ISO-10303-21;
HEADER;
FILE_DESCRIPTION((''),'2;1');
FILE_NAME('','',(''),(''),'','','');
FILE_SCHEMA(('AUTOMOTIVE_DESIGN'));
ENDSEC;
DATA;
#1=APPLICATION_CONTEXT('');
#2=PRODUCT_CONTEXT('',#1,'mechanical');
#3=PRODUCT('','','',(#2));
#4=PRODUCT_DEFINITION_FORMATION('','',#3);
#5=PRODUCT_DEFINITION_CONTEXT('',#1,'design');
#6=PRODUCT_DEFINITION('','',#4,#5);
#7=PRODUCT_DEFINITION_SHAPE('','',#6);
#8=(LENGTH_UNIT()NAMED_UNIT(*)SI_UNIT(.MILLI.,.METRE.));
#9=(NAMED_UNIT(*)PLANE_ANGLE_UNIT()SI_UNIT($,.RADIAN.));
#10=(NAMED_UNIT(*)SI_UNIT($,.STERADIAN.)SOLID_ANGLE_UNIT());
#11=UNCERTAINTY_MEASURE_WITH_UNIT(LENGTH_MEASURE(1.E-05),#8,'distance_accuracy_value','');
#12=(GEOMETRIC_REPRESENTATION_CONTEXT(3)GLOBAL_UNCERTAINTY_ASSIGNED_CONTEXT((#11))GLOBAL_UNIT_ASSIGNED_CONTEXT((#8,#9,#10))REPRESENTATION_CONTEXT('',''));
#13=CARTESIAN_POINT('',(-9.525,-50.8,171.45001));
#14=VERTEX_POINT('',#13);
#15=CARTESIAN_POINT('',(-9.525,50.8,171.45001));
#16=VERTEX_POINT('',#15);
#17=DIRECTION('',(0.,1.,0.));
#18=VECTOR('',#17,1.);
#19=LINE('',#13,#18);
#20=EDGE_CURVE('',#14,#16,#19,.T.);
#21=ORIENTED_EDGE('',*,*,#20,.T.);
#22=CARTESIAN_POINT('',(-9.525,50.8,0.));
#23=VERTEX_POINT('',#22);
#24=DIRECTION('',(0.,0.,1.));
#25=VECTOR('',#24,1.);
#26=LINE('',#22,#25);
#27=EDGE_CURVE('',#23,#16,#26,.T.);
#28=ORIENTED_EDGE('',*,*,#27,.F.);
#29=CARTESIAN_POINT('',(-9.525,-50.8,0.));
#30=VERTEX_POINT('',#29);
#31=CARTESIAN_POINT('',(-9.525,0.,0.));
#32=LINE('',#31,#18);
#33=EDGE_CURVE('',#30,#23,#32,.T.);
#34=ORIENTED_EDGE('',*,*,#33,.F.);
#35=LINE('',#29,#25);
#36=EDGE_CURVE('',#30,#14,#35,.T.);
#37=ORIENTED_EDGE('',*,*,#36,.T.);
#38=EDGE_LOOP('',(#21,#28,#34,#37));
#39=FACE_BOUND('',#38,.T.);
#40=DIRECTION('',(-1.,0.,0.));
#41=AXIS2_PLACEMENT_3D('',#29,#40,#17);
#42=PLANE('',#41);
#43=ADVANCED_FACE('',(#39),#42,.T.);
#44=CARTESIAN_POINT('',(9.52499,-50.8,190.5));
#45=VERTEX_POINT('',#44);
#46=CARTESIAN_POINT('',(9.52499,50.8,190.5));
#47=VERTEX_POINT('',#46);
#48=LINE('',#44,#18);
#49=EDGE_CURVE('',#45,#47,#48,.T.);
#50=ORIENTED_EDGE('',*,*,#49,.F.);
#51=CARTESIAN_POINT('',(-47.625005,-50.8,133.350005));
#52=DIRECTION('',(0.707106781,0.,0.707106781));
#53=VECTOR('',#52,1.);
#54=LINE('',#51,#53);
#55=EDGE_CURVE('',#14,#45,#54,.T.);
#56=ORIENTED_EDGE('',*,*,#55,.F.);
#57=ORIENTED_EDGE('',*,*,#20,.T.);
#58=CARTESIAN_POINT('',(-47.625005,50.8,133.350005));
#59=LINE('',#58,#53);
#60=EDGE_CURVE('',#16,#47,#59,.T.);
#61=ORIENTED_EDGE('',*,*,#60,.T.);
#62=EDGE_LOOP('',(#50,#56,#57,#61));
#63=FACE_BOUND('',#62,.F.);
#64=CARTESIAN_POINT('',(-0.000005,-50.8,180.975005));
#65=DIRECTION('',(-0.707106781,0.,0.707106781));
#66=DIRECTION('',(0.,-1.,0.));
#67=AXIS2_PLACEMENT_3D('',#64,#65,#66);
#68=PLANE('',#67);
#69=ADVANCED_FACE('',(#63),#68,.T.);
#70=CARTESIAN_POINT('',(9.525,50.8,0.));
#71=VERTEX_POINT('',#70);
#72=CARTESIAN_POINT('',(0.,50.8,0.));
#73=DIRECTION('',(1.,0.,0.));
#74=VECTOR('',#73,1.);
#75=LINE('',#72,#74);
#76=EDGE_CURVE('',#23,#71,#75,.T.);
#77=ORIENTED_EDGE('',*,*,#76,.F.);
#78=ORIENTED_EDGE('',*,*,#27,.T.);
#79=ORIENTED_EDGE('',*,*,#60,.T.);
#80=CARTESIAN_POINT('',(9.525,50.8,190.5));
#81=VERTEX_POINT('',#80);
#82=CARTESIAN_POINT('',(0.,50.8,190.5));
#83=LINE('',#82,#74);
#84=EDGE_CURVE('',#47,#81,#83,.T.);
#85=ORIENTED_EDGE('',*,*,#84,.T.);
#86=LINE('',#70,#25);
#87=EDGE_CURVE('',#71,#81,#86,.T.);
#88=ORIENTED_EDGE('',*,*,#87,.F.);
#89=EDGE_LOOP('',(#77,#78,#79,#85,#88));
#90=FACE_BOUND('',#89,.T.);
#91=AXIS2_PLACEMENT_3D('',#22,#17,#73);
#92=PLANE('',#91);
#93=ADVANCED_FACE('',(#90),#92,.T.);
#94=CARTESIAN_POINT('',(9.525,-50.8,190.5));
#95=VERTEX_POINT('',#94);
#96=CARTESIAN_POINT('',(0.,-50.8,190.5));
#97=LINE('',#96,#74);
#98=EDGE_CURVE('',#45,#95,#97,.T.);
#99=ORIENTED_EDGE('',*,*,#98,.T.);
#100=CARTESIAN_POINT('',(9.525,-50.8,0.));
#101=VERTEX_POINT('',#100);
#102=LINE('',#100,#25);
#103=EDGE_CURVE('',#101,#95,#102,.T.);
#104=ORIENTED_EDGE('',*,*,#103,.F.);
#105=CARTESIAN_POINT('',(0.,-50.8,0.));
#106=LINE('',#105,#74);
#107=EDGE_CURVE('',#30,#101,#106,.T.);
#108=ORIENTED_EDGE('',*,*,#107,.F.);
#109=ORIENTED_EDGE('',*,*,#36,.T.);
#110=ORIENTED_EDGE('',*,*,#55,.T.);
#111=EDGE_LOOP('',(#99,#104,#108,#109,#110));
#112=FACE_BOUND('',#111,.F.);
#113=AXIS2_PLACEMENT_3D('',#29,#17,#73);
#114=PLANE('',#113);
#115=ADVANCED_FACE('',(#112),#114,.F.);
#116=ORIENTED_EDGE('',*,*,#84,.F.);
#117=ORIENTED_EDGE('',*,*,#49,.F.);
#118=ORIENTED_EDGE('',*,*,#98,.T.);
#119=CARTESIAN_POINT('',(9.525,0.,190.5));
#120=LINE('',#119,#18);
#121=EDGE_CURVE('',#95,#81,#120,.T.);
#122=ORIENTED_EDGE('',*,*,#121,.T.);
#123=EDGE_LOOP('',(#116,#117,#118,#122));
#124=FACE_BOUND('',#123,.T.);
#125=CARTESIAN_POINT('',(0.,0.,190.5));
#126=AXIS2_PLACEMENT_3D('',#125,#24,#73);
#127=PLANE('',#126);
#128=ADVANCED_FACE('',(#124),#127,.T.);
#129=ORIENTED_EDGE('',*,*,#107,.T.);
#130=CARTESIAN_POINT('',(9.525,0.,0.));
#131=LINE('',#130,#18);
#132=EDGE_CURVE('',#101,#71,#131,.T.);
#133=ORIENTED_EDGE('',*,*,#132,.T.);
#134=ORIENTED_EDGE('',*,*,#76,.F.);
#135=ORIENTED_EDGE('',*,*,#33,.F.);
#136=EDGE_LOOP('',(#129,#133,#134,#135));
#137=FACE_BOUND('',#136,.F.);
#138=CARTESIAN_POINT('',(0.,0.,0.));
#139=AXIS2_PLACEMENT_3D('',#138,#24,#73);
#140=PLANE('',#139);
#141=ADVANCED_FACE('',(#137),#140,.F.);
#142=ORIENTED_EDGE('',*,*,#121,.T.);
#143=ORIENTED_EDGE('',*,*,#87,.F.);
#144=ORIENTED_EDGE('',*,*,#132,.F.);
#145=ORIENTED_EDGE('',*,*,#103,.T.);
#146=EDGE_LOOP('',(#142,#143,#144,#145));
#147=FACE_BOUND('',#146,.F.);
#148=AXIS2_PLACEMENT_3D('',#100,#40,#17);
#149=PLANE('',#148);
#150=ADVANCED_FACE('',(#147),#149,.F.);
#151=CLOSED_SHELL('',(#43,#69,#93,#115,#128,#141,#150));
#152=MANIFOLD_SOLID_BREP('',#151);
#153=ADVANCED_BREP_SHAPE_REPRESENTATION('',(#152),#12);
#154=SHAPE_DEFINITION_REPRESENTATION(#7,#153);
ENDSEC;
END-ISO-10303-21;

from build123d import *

# Parameters (mm, degrees)
F0_W     = 19.05
F0_H     = 101.6
F1_DEPTH = 190.5
F2_SIZE  = 19.04999


# Not quite as in the source:
# - a fillet or chamfer is up to 0.001 mm smaller than in the source, because OpenCascade refuses the exact size


with BuildPart() as f1:
    # F0 (on Top) → F1 (new body)
    with BuildSketch(Plane.XY):
        Rectangle(F0_W, F0_H)
    extrude(amount=F1_DEPTH)

    # F2 (size 19.05 in the source; OpenCascade refuses exactly that, so slightly less here)
    f2_edges = [f1.edges().sort_by_distance(p)[0] for p in [
        (-9.525, 0, 190.5),
    ]]
    chamfer(f2_edges, length=F2_SIZE)


solid = f1.part
